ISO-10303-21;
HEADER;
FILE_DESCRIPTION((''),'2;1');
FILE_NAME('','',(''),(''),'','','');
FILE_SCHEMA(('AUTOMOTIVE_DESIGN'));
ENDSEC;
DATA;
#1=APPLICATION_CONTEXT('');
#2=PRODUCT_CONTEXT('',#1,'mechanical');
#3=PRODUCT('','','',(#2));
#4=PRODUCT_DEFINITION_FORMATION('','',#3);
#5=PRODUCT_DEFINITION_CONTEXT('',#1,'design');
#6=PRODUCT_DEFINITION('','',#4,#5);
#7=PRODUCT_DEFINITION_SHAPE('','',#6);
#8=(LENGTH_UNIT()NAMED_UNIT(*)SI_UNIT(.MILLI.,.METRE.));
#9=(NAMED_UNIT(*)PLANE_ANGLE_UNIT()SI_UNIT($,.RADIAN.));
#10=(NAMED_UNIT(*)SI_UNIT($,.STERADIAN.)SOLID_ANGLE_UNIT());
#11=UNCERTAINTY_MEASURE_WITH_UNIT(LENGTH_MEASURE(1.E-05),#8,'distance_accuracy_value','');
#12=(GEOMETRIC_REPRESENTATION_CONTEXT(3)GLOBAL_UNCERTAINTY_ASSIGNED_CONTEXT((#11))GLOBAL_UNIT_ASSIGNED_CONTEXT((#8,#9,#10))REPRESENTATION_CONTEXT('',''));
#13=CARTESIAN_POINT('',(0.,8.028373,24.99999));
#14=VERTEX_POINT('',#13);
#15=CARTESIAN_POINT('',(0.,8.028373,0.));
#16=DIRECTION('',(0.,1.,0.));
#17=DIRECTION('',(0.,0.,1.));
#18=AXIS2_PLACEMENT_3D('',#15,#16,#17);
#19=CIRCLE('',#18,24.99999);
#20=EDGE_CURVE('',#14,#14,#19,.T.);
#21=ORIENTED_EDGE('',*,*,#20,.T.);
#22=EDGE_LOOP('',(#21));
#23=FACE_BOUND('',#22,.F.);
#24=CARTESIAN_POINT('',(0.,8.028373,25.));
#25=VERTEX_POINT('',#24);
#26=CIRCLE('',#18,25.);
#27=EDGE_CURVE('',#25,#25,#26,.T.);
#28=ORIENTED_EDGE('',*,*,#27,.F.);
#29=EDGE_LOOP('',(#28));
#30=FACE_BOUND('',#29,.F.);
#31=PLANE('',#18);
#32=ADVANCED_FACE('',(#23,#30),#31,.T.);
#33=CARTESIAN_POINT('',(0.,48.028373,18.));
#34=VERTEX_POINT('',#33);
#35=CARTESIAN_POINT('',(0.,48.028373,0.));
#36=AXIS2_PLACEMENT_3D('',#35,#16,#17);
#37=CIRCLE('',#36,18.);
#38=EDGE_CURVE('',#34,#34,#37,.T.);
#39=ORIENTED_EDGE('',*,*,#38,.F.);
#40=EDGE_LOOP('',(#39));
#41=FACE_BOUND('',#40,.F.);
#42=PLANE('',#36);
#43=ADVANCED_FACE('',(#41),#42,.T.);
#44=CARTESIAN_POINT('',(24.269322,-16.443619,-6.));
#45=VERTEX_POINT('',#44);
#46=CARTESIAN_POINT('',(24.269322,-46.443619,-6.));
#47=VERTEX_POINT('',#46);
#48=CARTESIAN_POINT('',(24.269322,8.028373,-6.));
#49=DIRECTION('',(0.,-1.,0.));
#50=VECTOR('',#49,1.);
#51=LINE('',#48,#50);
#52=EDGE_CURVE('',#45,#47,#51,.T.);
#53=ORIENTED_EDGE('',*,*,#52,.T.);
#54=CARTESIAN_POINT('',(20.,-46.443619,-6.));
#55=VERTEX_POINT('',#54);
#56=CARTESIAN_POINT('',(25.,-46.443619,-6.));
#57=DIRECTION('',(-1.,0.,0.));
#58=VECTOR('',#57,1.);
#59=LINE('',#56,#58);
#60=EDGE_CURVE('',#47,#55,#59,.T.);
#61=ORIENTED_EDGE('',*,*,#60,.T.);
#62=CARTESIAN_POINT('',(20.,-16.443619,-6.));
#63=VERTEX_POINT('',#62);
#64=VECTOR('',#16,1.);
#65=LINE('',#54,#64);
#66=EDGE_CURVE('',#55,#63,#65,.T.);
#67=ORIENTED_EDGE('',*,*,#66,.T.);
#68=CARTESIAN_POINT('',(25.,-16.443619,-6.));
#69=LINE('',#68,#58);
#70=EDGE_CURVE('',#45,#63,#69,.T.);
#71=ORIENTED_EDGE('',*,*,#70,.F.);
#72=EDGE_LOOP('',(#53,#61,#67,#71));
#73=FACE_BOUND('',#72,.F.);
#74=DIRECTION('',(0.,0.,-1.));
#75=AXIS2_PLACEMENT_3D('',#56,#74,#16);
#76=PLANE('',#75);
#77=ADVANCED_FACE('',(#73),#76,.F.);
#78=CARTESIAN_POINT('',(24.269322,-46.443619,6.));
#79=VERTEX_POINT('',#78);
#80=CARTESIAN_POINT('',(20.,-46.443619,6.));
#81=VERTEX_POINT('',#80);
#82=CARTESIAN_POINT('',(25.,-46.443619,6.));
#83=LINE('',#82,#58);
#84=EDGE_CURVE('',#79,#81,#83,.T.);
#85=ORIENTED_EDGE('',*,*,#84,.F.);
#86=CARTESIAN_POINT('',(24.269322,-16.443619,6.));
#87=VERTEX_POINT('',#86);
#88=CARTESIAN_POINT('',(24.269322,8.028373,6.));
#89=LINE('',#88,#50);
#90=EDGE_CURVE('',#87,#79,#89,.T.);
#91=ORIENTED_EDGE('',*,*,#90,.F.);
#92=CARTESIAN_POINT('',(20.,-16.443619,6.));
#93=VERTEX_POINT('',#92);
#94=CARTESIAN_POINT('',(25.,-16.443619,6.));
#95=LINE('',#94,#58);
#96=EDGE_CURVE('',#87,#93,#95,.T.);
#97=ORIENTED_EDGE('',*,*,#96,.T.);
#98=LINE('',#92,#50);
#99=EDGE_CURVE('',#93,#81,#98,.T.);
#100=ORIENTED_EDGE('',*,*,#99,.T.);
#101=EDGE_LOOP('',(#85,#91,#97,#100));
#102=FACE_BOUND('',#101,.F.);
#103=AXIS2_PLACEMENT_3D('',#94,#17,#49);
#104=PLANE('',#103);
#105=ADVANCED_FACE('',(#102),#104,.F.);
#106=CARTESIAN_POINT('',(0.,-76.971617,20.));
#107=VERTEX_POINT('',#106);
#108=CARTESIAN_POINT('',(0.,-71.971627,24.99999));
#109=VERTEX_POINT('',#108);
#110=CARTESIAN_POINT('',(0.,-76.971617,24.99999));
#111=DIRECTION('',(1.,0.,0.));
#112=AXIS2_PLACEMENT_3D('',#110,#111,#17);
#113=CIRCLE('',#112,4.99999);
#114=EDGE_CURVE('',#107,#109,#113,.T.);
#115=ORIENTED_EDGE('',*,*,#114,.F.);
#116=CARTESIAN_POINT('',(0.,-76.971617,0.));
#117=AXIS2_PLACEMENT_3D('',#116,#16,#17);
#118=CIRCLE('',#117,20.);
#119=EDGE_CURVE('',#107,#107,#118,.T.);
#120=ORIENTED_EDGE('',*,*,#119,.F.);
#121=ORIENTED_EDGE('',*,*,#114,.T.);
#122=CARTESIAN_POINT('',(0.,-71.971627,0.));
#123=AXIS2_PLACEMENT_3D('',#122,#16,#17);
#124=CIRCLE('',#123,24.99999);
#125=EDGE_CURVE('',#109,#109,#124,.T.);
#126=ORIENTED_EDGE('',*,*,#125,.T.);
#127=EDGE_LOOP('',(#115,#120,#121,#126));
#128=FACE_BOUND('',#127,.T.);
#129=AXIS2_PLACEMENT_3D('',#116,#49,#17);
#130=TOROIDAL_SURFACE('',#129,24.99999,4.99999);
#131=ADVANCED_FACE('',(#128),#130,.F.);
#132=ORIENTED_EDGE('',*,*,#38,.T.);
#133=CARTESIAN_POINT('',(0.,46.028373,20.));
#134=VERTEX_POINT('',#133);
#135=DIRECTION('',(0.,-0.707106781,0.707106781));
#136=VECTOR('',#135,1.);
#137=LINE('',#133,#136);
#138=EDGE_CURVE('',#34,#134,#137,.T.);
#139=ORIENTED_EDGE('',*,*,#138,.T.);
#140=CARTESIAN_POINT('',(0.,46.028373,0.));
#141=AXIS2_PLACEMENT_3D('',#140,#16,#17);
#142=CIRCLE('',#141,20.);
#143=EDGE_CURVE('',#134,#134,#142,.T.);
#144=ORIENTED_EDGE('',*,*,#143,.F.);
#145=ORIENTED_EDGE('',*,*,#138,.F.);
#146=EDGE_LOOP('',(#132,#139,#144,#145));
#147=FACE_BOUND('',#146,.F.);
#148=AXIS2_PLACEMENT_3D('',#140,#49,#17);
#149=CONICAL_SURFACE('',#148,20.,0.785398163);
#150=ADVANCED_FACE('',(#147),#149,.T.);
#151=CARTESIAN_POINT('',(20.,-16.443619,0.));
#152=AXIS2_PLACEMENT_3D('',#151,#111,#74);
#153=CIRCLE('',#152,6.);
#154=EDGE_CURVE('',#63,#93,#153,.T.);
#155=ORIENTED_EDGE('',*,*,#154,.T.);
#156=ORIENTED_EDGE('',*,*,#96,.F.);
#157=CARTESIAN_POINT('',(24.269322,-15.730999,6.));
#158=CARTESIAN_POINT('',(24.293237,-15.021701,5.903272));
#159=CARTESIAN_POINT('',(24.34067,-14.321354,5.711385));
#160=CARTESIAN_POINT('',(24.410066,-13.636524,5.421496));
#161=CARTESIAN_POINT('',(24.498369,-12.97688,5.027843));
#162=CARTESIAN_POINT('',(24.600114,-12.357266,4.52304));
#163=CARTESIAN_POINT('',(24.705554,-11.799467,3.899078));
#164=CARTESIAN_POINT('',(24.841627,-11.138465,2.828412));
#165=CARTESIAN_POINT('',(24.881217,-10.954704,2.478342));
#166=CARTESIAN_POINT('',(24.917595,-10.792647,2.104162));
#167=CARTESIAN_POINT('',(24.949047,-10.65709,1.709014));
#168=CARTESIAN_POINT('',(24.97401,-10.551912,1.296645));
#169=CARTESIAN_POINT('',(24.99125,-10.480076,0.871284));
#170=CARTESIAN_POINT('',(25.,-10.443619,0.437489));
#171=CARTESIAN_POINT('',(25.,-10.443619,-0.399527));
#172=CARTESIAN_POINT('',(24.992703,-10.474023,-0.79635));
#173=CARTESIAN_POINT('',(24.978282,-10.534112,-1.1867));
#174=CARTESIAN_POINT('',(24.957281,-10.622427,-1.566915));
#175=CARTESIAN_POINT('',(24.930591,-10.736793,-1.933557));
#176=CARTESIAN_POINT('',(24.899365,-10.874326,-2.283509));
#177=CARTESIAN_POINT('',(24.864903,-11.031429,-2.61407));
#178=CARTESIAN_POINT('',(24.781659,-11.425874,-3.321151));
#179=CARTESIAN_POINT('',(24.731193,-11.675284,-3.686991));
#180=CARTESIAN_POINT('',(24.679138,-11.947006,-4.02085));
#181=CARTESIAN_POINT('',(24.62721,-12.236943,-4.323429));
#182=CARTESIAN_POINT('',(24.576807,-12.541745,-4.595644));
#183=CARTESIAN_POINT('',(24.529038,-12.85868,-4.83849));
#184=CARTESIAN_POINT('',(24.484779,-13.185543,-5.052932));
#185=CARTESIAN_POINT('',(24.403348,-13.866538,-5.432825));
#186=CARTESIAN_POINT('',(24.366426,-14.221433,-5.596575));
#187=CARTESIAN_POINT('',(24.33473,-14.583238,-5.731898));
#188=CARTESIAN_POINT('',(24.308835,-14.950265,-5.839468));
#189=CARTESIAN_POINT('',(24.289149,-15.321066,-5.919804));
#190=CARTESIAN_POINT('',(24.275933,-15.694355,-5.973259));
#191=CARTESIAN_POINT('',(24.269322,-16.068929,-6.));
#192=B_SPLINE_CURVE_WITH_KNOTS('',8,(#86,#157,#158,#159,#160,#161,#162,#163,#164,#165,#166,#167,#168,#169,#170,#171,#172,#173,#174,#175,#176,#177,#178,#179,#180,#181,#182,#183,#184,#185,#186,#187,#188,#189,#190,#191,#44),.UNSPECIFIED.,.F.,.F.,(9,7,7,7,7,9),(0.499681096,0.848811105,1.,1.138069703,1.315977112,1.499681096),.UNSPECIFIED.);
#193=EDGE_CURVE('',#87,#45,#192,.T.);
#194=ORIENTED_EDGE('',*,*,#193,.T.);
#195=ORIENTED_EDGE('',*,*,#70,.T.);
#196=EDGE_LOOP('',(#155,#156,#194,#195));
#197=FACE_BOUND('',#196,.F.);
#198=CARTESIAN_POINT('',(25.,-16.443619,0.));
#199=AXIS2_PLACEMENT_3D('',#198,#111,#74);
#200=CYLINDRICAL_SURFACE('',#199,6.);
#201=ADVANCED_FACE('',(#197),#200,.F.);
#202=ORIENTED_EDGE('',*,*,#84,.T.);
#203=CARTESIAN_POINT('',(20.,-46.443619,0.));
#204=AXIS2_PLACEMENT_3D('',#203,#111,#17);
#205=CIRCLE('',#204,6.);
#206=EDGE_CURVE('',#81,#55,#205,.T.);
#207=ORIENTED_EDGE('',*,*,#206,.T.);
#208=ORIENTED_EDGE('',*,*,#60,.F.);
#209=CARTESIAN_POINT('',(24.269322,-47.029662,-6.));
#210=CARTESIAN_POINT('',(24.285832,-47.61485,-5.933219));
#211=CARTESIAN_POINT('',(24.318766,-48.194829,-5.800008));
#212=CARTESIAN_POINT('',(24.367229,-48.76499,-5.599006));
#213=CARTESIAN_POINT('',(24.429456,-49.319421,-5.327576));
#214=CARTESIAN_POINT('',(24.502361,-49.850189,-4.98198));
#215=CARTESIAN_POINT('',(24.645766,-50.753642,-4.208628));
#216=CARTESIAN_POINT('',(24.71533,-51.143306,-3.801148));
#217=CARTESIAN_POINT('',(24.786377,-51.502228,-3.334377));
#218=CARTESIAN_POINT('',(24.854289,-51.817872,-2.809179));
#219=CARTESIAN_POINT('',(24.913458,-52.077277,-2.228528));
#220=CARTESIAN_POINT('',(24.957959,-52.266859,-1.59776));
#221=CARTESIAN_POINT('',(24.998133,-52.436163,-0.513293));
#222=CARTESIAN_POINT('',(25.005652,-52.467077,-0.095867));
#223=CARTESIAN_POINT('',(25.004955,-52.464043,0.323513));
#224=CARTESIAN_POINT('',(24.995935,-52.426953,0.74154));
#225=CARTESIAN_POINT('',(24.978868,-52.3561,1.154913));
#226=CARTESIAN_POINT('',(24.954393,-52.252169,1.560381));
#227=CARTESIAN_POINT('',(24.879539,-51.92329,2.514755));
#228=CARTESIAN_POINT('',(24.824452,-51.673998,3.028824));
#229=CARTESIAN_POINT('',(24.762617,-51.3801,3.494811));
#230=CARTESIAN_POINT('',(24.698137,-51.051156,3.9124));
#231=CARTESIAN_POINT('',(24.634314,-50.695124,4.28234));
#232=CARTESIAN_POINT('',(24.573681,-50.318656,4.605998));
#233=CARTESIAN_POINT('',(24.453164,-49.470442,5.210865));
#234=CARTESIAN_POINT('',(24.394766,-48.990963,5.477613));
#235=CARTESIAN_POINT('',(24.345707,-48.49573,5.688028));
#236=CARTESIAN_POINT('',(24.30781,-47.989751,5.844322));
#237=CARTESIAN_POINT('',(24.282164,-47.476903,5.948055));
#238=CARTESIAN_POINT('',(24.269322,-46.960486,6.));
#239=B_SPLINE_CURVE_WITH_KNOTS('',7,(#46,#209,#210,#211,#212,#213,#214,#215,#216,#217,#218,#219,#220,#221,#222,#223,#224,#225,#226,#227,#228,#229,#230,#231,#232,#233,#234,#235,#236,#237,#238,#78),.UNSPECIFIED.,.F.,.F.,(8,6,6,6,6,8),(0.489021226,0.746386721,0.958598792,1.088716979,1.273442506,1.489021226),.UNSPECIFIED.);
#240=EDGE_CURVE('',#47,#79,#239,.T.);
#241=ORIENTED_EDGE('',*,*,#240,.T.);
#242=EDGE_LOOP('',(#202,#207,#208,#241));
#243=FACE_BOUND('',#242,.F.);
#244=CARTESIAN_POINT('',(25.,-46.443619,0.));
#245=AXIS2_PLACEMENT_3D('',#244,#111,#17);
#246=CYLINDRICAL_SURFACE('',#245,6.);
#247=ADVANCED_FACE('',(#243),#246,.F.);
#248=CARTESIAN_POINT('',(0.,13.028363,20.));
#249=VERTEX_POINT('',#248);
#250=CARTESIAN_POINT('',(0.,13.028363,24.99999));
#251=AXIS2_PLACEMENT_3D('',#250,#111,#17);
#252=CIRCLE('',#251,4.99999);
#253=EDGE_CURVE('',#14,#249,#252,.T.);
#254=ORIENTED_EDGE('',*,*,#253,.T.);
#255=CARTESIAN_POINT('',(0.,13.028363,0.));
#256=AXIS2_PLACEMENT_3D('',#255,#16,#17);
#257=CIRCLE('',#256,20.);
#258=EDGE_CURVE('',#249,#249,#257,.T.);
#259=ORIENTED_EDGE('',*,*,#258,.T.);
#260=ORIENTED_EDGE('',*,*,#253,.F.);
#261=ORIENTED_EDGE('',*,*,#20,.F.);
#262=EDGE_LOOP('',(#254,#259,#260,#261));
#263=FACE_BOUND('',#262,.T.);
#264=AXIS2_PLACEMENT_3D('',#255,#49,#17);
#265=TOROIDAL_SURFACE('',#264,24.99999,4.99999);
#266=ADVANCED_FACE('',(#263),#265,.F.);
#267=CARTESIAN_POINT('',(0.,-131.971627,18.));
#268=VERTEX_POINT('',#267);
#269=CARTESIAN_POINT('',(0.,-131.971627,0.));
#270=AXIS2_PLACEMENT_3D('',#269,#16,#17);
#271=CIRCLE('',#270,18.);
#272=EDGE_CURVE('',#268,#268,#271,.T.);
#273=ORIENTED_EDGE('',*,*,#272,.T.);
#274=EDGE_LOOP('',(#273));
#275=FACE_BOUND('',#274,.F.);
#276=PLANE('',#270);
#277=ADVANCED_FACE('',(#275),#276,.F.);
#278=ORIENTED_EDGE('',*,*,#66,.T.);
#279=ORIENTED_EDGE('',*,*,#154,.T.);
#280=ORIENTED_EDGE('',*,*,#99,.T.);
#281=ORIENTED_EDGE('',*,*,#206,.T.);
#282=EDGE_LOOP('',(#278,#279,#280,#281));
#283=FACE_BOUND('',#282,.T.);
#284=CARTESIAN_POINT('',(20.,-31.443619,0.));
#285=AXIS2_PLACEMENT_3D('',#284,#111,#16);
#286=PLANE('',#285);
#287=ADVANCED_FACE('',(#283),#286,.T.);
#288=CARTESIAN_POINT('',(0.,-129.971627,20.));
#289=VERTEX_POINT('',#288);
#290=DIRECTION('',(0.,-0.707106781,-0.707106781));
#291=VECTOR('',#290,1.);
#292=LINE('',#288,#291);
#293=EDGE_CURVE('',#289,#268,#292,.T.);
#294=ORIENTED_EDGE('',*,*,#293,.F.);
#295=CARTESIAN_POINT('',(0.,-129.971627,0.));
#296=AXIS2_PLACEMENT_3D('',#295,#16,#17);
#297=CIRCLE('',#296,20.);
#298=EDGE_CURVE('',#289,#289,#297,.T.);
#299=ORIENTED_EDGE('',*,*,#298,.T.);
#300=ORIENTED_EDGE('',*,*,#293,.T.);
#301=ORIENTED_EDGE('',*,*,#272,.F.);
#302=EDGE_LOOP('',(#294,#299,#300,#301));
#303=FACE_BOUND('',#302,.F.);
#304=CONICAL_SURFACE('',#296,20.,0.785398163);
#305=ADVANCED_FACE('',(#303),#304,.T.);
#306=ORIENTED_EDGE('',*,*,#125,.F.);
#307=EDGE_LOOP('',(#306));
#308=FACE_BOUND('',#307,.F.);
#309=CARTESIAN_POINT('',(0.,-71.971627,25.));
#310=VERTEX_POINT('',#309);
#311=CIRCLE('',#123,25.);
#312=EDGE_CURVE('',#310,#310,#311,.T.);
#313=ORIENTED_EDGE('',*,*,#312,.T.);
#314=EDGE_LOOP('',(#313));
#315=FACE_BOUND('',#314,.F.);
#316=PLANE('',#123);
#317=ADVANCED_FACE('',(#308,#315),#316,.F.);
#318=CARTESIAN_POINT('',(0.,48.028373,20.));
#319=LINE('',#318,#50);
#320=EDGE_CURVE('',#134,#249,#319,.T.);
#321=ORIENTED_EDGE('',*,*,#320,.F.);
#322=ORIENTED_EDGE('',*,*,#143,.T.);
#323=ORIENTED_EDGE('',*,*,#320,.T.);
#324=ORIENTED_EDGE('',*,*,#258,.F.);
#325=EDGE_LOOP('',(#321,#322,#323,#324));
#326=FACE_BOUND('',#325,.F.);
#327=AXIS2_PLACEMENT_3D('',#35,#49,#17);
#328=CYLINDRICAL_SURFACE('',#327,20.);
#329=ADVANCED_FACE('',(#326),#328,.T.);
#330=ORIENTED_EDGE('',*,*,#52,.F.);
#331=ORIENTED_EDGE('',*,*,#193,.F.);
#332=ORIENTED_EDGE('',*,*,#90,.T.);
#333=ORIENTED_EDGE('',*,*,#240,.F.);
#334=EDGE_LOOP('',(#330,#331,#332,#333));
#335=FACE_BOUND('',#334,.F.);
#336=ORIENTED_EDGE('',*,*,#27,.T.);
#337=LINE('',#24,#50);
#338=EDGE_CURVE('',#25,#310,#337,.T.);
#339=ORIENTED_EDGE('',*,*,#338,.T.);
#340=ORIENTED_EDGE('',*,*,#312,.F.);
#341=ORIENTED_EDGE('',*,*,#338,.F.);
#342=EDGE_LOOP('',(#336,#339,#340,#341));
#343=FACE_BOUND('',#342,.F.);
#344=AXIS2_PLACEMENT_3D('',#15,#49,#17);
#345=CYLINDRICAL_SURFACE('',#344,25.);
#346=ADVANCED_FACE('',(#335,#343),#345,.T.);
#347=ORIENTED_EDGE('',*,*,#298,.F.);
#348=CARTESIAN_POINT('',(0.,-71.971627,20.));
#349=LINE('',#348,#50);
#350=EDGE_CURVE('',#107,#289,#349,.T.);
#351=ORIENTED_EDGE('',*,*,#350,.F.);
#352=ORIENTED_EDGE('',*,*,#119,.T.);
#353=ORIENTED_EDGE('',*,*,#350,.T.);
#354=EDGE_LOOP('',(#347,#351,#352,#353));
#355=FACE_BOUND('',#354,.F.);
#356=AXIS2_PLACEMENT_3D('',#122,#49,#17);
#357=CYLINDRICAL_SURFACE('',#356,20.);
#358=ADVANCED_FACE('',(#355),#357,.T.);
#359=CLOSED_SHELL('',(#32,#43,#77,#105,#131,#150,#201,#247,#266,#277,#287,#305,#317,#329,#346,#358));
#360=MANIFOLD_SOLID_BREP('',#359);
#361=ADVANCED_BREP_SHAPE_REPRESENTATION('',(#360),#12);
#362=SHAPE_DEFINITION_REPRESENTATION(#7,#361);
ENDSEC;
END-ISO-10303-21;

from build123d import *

# Parameters (mm, degrees)
F4_SIZE  = 2
F5_R     = 4.99999
F6_DEPTH = 5


# Not quite as in the source:
# - a fillet or chamfer is up to 0.001 mm smaller than in the source, because OpenCascade refuses the exact size


with BuildPart() as f1:
    # F0 (on Right) → F1 (revolve)
    with BuildSketch(Plane.YZ):
        Polygon((8.0283725262, 25), (0, 25), (-71.9716274738, 25), (-71.9716274738, 20), (-131.9716274738, 20), (-131.9716274738, 0), (48.0283725262, 0), (48.0283725262, 20), (8.0283725262, 20), align=None)
    revolve(axis=Axis((0, -30.3001217544, 0), (0, 1, 0)))

    # F4
    f4_edges = [f1.edges().sort_by_distance(p)[0] for p in [
        (0, -131.971627, -20),
        (0, 48.028373, -20),
    ]]
    chamfer(f4_edges, length=F4_SIZE)

    # F5 (radius 5 in the source; OpenCascade refuses exactly that, so slightly less here)
    f5_edges = [f1.edges().sort_by_distance(p)[0] for p in [
        (0, -71.971627, -20),
        (0, 8.028373, -20),
    ]]
    fillet(f5_edges, radius=F5_R)

    # F3 (on offset) → F6 (cut)
    with BuildSketch(Plane.YZ.offset(25)):
        with BuildLine():
            Line((-16.4436194198, 6), (-46.4436194198, 6))
            ThreePointArc((-46.4436194198, 6), (-52.4436194198, 0), (-46.4436194198, -6))
            Line((-46.4436194198, -6), (-16.4436194198, -6))
            ThreePointArc((-16.4436194198, -6), (-10.4436194198, 0), (-16.4436194198, 6))
        make_face()
    extrude(amount=-F6_DEPTH, mode=Mode.SUBTRACT)


solid = f1.part
